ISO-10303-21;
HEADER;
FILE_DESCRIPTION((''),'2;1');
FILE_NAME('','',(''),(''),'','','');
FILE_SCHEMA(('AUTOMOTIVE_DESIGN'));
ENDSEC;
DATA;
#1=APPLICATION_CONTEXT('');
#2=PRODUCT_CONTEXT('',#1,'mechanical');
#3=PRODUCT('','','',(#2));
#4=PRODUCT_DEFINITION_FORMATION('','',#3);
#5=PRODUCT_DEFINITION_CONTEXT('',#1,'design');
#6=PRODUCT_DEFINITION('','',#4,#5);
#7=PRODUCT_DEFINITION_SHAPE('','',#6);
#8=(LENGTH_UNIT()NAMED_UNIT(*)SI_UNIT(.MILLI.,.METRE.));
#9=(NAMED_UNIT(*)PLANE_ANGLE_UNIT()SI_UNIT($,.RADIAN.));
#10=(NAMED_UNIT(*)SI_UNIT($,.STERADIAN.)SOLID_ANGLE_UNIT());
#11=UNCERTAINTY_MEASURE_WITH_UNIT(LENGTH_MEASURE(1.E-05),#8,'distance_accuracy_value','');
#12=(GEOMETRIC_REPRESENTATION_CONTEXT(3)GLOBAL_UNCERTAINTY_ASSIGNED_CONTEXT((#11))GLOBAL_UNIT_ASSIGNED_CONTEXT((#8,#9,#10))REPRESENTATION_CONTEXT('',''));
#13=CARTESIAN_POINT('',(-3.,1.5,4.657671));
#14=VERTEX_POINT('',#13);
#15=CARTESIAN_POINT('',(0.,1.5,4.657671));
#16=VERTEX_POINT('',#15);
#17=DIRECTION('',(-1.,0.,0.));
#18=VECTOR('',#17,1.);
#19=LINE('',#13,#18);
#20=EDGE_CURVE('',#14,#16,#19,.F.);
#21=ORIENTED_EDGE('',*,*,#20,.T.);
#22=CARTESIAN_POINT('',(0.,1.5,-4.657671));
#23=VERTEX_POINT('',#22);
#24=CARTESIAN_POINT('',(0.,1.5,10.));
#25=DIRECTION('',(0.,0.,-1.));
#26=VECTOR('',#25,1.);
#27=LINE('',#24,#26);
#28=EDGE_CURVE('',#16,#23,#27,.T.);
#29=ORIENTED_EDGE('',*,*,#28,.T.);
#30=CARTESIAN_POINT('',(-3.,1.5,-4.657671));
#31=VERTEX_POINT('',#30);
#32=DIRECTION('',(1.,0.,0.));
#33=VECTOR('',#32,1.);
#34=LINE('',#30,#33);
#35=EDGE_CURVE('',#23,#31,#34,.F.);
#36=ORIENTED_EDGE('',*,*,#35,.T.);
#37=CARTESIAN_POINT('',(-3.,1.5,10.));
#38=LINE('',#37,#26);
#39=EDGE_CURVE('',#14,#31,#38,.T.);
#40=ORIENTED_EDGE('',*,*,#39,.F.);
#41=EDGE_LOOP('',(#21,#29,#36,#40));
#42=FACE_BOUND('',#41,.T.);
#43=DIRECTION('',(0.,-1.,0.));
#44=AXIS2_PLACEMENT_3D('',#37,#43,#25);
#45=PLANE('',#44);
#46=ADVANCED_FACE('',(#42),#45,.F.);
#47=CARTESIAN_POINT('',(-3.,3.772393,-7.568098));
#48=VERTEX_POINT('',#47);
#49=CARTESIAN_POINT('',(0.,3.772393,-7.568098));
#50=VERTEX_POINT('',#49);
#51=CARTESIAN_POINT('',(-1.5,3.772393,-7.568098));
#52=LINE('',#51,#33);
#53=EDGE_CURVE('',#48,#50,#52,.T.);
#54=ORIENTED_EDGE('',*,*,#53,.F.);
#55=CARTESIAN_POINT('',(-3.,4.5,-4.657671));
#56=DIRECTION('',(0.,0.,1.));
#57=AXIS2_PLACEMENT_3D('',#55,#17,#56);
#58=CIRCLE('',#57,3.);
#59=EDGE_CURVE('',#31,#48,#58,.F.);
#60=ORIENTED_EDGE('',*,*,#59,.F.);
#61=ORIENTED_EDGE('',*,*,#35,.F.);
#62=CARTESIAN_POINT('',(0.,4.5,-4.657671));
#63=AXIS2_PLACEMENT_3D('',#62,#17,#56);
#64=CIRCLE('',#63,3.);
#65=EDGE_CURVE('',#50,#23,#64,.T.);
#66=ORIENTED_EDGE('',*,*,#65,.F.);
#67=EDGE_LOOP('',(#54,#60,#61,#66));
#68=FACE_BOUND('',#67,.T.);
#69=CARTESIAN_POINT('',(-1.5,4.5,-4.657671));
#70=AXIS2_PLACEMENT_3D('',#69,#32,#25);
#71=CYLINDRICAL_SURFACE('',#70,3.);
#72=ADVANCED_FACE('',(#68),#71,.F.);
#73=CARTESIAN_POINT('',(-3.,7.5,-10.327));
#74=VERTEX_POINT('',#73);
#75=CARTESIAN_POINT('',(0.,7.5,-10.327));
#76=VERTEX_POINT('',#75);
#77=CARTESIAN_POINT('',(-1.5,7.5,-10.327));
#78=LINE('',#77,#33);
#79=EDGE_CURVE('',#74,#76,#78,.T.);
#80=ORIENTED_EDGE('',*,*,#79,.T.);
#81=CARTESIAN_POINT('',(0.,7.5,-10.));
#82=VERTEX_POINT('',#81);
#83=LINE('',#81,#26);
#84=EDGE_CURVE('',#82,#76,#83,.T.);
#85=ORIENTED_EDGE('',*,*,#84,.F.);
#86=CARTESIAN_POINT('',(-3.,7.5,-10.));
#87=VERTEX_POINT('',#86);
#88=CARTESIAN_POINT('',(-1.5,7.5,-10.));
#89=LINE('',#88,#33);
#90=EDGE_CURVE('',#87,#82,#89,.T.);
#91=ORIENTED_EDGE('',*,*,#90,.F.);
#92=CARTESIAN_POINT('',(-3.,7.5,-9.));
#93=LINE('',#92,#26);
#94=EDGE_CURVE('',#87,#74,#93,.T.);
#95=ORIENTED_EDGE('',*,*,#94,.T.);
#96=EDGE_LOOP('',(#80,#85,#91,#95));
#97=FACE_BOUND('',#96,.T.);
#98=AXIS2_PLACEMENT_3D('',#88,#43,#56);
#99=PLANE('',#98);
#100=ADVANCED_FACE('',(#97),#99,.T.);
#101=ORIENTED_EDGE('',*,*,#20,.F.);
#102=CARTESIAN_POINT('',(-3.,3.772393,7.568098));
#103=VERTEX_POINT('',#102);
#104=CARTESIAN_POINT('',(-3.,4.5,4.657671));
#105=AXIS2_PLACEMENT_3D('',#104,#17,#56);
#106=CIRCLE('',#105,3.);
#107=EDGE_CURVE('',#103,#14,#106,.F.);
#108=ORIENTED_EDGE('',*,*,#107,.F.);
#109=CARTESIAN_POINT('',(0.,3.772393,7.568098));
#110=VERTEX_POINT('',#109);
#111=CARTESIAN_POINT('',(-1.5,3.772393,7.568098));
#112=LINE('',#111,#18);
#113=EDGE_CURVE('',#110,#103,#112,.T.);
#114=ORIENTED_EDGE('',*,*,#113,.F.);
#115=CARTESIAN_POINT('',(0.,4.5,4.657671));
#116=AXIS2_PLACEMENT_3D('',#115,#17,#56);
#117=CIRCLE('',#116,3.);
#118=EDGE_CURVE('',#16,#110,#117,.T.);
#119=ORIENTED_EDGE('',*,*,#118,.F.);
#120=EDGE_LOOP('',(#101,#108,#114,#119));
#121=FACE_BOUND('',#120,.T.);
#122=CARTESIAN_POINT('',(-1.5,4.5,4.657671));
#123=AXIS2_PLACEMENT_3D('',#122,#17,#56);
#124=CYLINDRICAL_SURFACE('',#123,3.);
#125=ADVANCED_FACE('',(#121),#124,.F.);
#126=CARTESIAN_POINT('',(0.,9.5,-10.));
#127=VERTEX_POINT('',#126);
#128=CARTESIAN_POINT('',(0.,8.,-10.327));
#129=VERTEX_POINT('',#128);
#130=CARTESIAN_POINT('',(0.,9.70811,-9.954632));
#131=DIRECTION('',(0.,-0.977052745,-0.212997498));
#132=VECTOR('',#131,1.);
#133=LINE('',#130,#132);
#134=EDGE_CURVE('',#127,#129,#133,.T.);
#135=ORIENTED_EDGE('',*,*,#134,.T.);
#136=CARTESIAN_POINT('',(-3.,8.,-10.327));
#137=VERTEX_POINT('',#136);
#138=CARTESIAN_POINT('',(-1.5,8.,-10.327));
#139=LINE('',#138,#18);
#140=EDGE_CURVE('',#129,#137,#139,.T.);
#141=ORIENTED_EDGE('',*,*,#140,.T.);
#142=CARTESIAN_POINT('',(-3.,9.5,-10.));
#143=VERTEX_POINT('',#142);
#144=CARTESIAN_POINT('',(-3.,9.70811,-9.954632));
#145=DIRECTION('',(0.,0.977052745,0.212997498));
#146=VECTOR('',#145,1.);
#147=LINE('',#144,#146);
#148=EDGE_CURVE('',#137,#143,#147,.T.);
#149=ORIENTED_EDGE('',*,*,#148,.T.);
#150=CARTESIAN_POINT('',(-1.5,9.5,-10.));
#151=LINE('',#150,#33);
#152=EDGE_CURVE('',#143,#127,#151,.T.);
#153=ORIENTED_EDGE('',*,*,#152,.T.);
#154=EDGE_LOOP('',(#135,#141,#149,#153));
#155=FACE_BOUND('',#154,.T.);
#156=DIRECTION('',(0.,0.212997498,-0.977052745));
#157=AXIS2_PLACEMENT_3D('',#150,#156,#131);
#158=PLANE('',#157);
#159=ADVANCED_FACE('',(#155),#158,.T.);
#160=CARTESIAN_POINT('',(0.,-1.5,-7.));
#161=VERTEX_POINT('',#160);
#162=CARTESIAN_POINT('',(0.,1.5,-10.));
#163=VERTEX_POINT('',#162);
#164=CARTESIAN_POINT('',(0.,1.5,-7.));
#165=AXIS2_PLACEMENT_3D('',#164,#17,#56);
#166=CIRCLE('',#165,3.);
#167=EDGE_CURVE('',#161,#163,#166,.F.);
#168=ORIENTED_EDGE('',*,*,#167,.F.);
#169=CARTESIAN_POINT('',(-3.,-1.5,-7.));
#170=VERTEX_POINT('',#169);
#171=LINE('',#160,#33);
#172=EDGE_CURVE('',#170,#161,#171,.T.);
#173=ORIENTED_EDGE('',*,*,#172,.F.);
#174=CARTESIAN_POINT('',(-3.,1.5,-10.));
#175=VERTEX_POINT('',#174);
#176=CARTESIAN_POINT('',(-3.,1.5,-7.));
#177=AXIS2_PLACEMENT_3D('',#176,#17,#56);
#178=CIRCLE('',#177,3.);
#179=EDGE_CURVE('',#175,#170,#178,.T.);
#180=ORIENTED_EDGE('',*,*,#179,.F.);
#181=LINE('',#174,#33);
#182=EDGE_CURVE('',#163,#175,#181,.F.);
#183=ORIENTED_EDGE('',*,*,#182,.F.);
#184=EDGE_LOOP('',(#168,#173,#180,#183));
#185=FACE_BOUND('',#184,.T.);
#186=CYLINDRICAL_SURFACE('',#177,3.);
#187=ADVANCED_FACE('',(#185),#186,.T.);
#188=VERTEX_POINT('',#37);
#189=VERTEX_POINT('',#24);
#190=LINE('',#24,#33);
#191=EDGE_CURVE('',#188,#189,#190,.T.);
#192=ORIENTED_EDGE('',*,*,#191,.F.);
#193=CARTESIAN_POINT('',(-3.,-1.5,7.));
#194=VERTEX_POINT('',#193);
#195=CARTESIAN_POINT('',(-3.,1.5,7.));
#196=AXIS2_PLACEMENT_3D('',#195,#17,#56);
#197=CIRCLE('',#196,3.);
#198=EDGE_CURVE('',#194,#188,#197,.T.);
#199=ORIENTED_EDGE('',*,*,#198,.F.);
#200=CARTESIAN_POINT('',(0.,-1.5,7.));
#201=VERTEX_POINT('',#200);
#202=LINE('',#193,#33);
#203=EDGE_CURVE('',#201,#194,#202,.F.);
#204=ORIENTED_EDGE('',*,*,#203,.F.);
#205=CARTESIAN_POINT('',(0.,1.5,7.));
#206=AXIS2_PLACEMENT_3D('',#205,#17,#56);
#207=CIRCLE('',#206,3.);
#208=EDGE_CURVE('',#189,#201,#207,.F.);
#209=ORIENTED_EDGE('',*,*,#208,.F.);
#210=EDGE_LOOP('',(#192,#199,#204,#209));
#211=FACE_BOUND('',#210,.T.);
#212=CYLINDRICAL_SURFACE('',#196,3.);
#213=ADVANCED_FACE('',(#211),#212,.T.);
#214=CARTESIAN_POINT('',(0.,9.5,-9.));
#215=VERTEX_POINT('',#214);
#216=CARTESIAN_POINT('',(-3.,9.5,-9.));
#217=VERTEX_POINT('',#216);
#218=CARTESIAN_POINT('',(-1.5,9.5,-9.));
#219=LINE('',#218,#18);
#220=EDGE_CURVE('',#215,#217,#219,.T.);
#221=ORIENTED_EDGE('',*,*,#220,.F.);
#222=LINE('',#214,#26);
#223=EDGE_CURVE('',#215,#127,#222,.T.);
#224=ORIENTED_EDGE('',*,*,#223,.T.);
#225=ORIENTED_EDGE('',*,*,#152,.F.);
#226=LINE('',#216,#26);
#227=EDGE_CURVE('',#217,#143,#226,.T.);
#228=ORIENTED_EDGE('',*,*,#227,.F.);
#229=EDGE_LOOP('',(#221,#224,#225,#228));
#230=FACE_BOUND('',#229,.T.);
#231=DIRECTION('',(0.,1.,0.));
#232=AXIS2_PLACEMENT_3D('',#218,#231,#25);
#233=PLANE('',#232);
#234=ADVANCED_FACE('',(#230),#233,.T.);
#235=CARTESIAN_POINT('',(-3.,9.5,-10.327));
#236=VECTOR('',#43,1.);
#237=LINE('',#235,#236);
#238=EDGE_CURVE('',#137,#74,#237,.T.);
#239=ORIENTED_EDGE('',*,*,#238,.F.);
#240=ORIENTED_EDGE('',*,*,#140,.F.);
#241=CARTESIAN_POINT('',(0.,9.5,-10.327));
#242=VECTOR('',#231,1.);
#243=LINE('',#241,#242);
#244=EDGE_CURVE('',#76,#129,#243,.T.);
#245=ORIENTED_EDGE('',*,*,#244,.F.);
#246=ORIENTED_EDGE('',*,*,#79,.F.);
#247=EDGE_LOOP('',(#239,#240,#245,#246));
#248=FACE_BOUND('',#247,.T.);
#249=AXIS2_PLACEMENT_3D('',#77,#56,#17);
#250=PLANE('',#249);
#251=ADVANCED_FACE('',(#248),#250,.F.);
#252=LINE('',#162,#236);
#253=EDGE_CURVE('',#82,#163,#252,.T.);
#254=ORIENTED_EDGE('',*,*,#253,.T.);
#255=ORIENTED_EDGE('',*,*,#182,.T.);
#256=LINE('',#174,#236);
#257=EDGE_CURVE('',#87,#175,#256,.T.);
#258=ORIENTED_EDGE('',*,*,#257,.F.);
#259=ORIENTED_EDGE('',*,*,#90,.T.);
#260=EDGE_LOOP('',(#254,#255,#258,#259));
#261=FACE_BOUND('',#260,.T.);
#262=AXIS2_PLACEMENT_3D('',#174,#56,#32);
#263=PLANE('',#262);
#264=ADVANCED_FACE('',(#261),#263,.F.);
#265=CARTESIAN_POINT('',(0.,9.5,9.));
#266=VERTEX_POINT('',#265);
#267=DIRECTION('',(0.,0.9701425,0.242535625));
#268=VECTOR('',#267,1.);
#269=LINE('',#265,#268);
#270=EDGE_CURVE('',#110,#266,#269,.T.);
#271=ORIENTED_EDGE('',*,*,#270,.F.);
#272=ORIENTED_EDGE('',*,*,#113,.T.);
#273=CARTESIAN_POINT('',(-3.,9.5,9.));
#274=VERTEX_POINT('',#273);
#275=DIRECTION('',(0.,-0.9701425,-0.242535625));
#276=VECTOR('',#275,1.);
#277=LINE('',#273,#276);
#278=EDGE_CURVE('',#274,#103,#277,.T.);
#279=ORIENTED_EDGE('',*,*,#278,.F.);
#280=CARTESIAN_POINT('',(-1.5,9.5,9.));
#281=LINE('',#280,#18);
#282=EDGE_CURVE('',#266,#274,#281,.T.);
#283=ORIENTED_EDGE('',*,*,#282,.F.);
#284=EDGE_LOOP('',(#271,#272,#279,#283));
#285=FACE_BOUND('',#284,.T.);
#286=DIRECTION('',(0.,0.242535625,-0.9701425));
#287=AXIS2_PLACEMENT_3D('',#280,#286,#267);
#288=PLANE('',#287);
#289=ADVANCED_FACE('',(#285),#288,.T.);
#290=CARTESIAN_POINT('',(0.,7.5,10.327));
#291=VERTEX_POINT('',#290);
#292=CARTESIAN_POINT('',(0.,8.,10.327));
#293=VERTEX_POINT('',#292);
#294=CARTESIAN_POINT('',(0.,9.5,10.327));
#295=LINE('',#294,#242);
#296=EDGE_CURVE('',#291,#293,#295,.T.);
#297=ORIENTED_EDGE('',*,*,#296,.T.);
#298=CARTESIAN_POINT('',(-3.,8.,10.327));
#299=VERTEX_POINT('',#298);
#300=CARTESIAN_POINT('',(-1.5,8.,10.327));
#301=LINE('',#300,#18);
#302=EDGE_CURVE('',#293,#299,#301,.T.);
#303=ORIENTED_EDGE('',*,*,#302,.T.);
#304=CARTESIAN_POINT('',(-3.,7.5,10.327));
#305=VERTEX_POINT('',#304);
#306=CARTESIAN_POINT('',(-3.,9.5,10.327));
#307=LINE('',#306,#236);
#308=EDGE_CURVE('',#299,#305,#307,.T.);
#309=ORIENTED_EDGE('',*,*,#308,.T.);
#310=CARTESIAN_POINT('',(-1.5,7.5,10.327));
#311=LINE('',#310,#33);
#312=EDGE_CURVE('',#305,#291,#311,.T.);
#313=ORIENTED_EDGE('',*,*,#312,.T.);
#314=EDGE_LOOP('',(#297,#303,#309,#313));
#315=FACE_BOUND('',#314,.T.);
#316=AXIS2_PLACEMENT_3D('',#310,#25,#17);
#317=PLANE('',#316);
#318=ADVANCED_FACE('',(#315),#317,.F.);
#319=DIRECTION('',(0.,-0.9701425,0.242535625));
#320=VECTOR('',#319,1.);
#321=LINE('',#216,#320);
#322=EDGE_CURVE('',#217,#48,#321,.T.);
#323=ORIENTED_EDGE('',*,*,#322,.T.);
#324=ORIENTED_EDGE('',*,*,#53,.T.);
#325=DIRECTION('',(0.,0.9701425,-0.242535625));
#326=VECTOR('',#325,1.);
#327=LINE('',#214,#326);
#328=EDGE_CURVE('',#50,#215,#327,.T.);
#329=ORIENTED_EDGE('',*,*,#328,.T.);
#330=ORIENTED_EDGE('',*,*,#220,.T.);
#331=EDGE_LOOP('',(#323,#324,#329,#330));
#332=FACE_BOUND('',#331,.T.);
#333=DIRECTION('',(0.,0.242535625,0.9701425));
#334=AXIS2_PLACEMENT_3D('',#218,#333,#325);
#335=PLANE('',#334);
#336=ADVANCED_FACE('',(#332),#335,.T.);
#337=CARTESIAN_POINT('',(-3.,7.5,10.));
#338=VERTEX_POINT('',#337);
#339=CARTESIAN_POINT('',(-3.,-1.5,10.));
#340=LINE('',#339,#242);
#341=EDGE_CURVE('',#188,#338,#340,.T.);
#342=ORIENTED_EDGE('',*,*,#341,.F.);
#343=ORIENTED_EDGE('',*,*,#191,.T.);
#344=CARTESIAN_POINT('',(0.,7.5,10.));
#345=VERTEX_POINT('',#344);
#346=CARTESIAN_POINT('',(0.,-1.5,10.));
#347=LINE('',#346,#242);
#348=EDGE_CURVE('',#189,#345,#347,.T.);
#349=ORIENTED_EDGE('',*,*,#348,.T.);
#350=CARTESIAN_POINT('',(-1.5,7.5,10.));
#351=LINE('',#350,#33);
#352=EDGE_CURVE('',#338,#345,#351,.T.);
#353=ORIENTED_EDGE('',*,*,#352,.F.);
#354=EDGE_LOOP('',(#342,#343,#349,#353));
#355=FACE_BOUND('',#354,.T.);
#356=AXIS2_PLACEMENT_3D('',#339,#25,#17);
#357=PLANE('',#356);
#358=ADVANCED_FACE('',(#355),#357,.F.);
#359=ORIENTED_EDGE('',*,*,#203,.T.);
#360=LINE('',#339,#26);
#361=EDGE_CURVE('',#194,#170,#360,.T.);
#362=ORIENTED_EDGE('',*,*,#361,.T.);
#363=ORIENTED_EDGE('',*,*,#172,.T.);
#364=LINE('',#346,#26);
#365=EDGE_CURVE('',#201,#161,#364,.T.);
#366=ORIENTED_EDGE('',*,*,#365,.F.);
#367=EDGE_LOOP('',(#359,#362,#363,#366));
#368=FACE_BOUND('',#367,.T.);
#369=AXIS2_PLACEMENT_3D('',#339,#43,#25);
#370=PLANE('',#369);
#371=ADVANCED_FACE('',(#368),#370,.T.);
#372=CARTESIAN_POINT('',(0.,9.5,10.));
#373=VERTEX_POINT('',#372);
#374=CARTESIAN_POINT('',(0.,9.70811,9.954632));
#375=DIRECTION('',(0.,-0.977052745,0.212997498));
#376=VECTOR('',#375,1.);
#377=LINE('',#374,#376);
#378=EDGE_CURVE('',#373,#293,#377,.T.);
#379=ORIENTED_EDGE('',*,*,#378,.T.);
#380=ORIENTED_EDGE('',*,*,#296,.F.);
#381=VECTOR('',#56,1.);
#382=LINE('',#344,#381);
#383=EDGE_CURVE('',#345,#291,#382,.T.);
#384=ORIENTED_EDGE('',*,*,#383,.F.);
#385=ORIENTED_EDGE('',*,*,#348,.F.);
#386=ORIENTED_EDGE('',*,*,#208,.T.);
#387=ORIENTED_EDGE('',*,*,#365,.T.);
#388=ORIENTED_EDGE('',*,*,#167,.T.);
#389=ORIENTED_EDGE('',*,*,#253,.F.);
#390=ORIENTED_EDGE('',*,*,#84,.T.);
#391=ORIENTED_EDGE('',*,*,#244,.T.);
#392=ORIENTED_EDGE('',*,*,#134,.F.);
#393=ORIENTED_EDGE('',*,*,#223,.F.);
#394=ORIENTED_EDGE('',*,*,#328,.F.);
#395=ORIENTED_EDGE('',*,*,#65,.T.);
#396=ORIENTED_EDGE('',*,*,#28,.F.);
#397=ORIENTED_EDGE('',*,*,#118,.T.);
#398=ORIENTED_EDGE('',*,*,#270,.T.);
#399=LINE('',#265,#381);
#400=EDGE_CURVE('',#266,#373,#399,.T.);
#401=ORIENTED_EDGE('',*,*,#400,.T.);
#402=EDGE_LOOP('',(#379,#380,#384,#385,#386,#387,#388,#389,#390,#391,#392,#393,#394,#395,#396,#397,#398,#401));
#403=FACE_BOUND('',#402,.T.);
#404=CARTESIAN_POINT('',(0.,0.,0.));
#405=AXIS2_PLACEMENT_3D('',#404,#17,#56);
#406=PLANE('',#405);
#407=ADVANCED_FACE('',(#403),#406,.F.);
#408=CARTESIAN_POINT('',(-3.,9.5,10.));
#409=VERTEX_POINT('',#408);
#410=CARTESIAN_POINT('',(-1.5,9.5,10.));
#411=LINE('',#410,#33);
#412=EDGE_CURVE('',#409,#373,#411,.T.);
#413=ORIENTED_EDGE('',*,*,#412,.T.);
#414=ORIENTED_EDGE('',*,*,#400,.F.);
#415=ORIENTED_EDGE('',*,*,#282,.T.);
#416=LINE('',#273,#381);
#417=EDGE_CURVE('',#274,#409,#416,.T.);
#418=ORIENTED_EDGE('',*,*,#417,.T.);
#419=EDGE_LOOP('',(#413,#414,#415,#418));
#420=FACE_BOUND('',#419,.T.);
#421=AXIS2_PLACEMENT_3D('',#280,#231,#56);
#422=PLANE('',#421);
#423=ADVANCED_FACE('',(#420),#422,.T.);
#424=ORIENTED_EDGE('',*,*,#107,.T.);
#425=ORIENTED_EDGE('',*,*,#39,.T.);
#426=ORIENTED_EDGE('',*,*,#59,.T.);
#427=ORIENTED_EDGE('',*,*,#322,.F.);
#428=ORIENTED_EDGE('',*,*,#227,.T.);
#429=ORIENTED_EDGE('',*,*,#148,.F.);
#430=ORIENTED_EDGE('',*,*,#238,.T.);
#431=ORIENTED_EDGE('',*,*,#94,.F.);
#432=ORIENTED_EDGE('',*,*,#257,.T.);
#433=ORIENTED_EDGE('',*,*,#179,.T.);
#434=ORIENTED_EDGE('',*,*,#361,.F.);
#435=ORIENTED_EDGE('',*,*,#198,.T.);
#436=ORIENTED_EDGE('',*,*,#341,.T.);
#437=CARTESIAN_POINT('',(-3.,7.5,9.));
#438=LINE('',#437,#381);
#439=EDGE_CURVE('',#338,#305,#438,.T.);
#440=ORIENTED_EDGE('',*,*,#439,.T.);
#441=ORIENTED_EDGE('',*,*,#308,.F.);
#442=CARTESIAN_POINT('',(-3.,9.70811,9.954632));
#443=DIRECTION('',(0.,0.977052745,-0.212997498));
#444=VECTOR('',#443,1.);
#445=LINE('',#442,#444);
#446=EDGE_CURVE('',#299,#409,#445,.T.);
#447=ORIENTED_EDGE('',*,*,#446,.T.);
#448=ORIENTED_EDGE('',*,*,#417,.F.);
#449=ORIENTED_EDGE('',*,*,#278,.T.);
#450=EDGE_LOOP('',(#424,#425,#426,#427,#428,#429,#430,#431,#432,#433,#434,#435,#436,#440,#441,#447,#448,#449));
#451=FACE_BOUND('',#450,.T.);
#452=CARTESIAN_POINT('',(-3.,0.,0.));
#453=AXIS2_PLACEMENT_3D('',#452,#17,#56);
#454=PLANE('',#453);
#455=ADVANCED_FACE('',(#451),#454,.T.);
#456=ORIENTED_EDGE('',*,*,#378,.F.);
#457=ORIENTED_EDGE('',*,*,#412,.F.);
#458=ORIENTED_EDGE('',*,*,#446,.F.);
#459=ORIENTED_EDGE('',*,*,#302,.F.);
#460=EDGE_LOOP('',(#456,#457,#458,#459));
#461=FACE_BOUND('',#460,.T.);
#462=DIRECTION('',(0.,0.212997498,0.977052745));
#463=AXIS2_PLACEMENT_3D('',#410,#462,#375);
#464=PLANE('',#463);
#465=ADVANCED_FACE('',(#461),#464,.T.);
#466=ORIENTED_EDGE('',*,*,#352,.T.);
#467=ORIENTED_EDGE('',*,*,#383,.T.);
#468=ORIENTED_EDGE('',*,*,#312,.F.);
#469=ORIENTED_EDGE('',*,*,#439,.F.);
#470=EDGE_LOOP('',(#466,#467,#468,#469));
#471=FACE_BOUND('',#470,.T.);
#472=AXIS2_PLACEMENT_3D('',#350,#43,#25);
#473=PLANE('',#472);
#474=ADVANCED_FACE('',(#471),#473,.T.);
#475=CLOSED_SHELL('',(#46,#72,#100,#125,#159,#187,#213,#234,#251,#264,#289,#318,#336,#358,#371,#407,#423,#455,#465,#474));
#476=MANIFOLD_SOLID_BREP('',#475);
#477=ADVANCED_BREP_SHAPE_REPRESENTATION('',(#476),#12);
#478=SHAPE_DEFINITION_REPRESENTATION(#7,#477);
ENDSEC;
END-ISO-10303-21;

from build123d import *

# Parameters (mm, degrees)
SKETCH1_W           = 20
SKETCH1_H           = 3
EXTRUDE_THIN1_DEPTH = 3
SNAP_START          = -3
SNAP_HOOK1_DEPTH    = 3
FILLET2_R           = 3


# Read off the part's stored shape, not the designer's step: Snap Hook1
with BuildPart() as part:
    # Sketch1 → Extrude-Thin1 (new body)
    with BuildSketch(Plane(origin=(0, 0, 0), x_dir=(0, 0, -1), z_dir=(1, 0, 0))):
        Rectangle(SKETCH1_W, SKETCH1_H)
    extrude(amount=-EXTRUDE_THIN1_DEPTH)

    # Snap Hook1 outline → Snap Hook1 (add)
    with BuildSketch(Plane.YZ.offset(SNAP_START)):
        Polygon((7.5, 10), (1.5, 10), (1.5, 7), (9.5, 9), (9.5, 10), (8, 10.327), (7.5, 10.327), align=None)
    snap_hook1 = extrude(amount=SNAP_HOOK1_DEPTH)

    # Mirror2: Snap Hook1 across plane
    add(snap_hook1.mirror(Plane.XY))

    # Fillet2
    fillet2_edges = [part.edges().sort_by_distance(p)[0] for p in [
        (-1.5, 1.5, 7),
        (-1.5, 1.5, -7),
        (-1.5, -1.5, 10),
        (-1.5, -1.5, -10),
    ]]
    fillet(fillet2_edges, radius=FILLET2_R)


solid = part.part
